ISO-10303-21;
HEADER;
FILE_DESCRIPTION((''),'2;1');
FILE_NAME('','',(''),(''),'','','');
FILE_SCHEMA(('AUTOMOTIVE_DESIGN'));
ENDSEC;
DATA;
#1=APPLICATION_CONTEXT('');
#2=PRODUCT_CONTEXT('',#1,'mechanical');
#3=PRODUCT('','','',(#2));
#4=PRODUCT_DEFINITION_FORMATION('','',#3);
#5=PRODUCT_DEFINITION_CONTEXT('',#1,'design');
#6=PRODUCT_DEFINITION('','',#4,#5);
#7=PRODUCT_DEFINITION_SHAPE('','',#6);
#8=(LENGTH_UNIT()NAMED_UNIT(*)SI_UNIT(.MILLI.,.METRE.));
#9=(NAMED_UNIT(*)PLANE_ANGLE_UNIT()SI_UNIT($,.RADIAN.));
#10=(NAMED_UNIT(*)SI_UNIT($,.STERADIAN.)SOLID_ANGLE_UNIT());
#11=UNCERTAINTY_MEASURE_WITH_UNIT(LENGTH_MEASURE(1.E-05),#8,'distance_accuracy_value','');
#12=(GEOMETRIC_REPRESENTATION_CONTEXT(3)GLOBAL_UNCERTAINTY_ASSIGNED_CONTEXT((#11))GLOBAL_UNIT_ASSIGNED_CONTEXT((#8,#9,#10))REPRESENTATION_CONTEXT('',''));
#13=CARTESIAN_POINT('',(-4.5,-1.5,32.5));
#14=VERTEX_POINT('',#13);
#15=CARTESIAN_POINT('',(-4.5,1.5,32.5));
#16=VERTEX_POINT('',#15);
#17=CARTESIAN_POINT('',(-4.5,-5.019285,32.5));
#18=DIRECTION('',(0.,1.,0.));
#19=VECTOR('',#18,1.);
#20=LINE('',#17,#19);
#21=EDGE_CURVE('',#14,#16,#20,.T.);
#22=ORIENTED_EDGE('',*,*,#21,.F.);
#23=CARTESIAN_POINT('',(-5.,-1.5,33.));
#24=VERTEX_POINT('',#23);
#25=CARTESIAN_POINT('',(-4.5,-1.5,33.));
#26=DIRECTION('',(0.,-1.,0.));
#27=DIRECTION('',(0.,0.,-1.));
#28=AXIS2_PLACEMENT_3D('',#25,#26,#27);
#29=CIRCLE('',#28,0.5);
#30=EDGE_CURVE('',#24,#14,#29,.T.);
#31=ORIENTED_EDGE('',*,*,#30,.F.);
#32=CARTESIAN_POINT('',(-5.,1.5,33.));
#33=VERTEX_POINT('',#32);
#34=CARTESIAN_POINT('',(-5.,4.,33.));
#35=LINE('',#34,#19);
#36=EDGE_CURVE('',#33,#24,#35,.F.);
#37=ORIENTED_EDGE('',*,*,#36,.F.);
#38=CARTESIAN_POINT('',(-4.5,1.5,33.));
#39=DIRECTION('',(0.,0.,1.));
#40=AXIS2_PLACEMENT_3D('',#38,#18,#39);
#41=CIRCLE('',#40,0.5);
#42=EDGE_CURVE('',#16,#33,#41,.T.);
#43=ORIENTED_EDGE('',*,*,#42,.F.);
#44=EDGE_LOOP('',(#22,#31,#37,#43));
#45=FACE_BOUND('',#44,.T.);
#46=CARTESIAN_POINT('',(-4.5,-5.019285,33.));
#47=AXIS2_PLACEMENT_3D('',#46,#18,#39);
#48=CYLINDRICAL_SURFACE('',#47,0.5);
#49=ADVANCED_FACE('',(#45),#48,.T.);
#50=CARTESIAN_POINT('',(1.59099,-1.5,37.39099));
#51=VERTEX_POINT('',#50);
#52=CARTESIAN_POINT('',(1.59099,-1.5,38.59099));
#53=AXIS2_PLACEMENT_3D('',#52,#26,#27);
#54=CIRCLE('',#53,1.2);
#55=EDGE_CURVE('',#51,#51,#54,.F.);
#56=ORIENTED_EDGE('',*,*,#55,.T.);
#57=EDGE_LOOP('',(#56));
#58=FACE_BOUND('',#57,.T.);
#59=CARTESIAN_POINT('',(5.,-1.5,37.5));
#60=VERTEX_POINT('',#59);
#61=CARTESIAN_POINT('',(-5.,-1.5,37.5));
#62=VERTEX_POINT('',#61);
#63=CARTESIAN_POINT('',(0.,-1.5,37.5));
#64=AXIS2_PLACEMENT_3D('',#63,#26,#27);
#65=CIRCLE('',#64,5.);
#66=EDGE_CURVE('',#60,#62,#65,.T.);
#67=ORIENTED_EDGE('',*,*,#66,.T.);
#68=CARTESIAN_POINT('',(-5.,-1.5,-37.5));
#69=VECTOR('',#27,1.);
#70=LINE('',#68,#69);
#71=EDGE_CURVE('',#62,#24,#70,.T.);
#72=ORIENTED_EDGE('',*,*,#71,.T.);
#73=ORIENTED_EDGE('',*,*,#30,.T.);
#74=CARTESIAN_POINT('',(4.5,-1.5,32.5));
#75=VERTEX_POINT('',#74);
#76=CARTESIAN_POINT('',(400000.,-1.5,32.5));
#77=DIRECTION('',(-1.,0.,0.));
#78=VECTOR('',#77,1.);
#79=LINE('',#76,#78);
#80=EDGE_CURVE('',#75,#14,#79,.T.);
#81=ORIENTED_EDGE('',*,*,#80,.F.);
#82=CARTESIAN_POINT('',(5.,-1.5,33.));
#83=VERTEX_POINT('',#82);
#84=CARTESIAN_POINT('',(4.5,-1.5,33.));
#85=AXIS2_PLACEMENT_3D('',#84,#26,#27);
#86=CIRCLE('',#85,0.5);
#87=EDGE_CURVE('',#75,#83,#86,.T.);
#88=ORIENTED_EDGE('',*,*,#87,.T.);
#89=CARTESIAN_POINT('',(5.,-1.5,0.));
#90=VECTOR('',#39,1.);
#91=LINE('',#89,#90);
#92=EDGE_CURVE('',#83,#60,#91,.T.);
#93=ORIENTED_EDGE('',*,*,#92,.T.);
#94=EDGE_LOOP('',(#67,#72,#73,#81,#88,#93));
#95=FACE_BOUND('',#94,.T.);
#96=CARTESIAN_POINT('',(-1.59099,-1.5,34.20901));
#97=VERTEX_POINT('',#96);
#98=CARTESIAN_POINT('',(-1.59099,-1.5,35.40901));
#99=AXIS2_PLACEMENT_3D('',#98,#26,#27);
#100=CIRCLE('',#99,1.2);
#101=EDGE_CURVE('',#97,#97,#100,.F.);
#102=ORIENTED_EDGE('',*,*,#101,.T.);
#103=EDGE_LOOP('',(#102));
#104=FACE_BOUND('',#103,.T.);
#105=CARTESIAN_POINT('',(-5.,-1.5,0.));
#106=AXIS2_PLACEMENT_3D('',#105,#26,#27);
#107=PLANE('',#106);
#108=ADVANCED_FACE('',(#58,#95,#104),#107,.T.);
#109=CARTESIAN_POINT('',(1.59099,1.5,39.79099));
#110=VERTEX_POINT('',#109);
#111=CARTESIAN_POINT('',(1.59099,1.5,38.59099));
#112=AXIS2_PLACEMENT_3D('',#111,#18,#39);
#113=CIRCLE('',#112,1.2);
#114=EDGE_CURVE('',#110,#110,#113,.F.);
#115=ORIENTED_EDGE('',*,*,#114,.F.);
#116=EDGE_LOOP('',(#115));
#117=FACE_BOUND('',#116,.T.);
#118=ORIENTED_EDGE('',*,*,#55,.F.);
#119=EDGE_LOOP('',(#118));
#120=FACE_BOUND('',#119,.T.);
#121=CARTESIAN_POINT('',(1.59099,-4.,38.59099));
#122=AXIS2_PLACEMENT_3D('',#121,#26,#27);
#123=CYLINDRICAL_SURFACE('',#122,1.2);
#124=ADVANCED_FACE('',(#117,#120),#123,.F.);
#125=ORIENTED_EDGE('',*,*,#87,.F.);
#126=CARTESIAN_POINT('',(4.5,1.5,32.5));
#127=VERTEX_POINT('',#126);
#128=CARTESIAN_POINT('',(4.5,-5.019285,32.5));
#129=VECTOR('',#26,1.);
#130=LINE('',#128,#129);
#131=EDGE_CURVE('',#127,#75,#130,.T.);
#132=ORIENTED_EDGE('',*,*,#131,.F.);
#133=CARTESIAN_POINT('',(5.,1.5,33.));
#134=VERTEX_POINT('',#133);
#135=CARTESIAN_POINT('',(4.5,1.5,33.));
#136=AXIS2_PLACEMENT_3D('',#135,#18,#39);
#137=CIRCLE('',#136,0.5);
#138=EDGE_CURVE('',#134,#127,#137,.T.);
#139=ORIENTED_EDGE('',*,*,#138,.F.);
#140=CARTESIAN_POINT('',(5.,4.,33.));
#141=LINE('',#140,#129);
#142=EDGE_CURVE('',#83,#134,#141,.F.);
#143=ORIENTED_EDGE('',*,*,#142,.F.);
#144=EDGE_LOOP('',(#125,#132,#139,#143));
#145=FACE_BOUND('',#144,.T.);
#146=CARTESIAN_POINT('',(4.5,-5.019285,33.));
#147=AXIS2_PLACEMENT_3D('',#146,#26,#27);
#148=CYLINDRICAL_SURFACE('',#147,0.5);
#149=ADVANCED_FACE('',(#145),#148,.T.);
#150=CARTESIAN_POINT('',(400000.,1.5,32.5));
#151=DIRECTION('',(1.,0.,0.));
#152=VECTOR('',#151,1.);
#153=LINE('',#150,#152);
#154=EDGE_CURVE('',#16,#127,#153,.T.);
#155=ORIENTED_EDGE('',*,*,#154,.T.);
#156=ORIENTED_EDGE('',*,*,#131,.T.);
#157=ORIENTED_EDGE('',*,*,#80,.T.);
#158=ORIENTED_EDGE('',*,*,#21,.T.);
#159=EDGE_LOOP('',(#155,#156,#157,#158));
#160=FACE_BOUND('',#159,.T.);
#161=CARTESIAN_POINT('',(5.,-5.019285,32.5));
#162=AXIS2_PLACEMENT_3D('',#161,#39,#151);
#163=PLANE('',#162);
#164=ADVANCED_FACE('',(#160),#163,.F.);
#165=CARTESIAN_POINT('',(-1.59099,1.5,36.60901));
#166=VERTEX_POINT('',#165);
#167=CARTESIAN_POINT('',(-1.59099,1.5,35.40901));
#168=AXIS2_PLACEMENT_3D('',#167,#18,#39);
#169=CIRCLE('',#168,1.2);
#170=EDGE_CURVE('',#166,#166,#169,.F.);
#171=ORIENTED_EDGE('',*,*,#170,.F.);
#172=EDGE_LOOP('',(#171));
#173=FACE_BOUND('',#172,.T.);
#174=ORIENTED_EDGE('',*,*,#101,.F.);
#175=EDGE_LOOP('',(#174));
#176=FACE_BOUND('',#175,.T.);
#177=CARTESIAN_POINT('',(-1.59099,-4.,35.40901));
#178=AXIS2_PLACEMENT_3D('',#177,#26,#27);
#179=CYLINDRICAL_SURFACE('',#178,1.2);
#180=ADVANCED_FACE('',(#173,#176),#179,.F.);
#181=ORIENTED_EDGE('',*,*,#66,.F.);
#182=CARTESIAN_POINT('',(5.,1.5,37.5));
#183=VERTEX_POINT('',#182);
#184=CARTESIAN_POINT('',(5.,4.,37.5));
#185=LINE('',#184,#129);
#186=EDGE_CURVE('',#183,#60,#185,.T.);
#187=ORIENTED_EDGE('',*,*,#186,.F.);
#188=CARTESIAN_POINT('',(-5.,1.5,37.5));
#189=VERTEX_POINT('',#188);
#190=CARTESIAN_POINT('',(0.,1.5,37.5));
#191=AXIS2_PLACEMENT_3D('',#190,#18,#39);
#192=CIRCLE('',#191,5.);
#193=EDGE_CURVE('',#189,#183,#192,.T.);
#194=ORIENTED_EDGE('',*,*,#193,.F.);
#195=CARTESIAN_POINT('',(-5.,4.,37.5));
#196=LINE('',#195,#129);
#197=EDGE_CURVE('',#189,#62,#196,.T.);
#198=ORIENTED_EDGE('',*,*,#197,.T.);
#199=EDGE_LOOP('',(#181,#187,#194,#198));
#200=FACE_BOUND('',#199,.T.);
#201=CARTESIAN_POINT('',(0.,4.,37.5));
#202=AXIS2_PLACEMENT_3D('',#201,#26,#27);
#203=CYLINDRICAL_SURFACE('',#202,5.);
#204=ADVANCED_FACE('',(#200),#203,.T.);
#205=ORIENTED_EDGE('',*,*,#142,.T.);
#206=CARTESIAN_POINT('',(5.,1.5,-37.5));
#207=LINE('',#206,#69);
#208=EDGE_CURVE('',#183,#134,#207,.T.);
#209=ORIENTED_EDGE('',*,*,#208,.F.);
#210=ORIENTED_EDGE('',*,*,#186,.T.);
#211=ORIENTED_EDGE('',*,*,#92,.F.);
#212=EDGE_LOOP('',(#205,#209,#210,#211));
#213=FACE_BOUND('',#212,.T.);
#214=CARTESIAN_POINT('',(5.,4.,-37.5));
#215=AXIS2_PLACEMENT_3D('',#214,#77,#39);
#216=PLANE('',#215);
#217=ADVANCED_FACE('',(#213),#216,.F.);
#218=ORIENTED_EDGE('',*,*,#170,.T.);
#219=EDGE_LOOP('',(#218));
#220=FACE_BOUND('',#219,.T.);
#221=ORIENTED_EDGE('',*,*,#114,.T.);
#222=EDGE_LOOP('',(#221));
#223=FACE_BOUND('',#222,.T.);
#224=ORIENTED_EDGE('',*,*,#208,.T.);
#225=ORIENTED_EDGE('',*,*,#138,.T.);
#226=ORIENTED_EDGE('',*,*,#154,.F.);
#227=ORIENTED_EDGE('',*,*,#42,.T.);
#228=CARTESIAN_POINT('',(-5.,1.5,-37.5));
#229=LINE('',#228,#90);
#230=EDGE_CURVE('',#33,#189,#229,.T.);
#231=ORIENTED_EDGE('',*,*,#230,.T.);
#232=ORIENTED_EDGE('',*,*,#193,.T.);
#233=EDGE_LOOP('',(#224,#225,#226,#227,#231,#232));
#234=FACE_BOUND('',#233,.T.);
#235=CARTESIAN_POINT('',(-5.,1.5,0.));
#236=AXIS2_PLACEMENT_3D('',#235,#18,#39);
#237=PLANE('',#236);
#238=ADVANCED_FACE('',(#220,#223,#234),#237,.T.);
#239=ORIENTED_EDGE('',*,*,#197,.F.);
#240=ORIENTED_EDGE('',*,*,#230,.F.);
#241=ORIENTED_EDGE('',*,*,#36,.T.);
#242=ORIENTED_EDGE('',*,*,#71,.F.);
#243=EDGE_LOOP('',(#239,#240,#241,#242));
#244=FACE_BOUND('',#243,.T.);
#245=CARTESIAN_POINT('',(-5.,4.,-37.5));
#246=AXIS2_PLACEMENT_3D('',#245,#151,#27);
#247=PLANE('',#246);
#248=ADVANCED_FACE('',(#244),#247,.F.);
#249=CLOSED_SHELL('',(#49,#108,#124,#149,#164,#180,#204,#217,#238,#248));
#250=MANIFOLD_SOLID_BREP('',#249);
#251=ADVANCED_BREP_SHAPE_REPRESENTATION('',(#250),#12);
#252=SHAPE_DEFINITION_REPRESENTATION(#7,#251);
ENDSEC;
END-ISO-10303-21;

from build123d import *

# Parameters (mm, degrees)
STOCK_U_HANDLE_1_START     = -1.5
STOCK_U_HANDLE_1_OUTLINE_R = 1.2
STOCK_U_HANDLE_1_DEPTH     = 3
FILLET1_R                  = 0.5


# Read off the part's stored shape, not the designer's step: Stock-u-handle-1
with BuildPart() as part:
    # Stock-u-handle-1 outline → Stock-u-handle-1 (new body)
    with BuildSketch(Plane(origin=(0, 0, 0), x_dir=(1, 0, 0), z_dir=(0, 1, 0)).offset(STOCK_U_HANDLE_1_START)):
        with BuildLine():
            Line((5, -32.5), (-5, -32.5))
            Line((-5, -32.5), (-5, -37.5))
            ThreePointArc((-5, -37.5), (0, -42.5), (5, -37.5))
            Line((5, -37.5), (5, -32.5))
        make_face()
        with Locations((1.590990258, -38.590990258)):
            Circle(STOCK_U_HANDLE_1_OUTLINE_R, mode=Mode.SUBTRACT)
        with Locations((-1.590990258, -35.409009742)):
            Circle(STOCK_U_HANDLE_1_OUTLINE_R, mode=Mode.SUBTRACT)
    extrude(amount=STOCK_U_HANDLE_1_DEPTH)

    # Fillet1
    fillet1_edges = [part.edges().sort_by_distance(p)[0] for p in [
        (-5, 0, 32.5),
        (5, 0, 32.5),
    ]]
    fillet(fillet1_edges, radius=FILLET1_R)


solid = part.part
